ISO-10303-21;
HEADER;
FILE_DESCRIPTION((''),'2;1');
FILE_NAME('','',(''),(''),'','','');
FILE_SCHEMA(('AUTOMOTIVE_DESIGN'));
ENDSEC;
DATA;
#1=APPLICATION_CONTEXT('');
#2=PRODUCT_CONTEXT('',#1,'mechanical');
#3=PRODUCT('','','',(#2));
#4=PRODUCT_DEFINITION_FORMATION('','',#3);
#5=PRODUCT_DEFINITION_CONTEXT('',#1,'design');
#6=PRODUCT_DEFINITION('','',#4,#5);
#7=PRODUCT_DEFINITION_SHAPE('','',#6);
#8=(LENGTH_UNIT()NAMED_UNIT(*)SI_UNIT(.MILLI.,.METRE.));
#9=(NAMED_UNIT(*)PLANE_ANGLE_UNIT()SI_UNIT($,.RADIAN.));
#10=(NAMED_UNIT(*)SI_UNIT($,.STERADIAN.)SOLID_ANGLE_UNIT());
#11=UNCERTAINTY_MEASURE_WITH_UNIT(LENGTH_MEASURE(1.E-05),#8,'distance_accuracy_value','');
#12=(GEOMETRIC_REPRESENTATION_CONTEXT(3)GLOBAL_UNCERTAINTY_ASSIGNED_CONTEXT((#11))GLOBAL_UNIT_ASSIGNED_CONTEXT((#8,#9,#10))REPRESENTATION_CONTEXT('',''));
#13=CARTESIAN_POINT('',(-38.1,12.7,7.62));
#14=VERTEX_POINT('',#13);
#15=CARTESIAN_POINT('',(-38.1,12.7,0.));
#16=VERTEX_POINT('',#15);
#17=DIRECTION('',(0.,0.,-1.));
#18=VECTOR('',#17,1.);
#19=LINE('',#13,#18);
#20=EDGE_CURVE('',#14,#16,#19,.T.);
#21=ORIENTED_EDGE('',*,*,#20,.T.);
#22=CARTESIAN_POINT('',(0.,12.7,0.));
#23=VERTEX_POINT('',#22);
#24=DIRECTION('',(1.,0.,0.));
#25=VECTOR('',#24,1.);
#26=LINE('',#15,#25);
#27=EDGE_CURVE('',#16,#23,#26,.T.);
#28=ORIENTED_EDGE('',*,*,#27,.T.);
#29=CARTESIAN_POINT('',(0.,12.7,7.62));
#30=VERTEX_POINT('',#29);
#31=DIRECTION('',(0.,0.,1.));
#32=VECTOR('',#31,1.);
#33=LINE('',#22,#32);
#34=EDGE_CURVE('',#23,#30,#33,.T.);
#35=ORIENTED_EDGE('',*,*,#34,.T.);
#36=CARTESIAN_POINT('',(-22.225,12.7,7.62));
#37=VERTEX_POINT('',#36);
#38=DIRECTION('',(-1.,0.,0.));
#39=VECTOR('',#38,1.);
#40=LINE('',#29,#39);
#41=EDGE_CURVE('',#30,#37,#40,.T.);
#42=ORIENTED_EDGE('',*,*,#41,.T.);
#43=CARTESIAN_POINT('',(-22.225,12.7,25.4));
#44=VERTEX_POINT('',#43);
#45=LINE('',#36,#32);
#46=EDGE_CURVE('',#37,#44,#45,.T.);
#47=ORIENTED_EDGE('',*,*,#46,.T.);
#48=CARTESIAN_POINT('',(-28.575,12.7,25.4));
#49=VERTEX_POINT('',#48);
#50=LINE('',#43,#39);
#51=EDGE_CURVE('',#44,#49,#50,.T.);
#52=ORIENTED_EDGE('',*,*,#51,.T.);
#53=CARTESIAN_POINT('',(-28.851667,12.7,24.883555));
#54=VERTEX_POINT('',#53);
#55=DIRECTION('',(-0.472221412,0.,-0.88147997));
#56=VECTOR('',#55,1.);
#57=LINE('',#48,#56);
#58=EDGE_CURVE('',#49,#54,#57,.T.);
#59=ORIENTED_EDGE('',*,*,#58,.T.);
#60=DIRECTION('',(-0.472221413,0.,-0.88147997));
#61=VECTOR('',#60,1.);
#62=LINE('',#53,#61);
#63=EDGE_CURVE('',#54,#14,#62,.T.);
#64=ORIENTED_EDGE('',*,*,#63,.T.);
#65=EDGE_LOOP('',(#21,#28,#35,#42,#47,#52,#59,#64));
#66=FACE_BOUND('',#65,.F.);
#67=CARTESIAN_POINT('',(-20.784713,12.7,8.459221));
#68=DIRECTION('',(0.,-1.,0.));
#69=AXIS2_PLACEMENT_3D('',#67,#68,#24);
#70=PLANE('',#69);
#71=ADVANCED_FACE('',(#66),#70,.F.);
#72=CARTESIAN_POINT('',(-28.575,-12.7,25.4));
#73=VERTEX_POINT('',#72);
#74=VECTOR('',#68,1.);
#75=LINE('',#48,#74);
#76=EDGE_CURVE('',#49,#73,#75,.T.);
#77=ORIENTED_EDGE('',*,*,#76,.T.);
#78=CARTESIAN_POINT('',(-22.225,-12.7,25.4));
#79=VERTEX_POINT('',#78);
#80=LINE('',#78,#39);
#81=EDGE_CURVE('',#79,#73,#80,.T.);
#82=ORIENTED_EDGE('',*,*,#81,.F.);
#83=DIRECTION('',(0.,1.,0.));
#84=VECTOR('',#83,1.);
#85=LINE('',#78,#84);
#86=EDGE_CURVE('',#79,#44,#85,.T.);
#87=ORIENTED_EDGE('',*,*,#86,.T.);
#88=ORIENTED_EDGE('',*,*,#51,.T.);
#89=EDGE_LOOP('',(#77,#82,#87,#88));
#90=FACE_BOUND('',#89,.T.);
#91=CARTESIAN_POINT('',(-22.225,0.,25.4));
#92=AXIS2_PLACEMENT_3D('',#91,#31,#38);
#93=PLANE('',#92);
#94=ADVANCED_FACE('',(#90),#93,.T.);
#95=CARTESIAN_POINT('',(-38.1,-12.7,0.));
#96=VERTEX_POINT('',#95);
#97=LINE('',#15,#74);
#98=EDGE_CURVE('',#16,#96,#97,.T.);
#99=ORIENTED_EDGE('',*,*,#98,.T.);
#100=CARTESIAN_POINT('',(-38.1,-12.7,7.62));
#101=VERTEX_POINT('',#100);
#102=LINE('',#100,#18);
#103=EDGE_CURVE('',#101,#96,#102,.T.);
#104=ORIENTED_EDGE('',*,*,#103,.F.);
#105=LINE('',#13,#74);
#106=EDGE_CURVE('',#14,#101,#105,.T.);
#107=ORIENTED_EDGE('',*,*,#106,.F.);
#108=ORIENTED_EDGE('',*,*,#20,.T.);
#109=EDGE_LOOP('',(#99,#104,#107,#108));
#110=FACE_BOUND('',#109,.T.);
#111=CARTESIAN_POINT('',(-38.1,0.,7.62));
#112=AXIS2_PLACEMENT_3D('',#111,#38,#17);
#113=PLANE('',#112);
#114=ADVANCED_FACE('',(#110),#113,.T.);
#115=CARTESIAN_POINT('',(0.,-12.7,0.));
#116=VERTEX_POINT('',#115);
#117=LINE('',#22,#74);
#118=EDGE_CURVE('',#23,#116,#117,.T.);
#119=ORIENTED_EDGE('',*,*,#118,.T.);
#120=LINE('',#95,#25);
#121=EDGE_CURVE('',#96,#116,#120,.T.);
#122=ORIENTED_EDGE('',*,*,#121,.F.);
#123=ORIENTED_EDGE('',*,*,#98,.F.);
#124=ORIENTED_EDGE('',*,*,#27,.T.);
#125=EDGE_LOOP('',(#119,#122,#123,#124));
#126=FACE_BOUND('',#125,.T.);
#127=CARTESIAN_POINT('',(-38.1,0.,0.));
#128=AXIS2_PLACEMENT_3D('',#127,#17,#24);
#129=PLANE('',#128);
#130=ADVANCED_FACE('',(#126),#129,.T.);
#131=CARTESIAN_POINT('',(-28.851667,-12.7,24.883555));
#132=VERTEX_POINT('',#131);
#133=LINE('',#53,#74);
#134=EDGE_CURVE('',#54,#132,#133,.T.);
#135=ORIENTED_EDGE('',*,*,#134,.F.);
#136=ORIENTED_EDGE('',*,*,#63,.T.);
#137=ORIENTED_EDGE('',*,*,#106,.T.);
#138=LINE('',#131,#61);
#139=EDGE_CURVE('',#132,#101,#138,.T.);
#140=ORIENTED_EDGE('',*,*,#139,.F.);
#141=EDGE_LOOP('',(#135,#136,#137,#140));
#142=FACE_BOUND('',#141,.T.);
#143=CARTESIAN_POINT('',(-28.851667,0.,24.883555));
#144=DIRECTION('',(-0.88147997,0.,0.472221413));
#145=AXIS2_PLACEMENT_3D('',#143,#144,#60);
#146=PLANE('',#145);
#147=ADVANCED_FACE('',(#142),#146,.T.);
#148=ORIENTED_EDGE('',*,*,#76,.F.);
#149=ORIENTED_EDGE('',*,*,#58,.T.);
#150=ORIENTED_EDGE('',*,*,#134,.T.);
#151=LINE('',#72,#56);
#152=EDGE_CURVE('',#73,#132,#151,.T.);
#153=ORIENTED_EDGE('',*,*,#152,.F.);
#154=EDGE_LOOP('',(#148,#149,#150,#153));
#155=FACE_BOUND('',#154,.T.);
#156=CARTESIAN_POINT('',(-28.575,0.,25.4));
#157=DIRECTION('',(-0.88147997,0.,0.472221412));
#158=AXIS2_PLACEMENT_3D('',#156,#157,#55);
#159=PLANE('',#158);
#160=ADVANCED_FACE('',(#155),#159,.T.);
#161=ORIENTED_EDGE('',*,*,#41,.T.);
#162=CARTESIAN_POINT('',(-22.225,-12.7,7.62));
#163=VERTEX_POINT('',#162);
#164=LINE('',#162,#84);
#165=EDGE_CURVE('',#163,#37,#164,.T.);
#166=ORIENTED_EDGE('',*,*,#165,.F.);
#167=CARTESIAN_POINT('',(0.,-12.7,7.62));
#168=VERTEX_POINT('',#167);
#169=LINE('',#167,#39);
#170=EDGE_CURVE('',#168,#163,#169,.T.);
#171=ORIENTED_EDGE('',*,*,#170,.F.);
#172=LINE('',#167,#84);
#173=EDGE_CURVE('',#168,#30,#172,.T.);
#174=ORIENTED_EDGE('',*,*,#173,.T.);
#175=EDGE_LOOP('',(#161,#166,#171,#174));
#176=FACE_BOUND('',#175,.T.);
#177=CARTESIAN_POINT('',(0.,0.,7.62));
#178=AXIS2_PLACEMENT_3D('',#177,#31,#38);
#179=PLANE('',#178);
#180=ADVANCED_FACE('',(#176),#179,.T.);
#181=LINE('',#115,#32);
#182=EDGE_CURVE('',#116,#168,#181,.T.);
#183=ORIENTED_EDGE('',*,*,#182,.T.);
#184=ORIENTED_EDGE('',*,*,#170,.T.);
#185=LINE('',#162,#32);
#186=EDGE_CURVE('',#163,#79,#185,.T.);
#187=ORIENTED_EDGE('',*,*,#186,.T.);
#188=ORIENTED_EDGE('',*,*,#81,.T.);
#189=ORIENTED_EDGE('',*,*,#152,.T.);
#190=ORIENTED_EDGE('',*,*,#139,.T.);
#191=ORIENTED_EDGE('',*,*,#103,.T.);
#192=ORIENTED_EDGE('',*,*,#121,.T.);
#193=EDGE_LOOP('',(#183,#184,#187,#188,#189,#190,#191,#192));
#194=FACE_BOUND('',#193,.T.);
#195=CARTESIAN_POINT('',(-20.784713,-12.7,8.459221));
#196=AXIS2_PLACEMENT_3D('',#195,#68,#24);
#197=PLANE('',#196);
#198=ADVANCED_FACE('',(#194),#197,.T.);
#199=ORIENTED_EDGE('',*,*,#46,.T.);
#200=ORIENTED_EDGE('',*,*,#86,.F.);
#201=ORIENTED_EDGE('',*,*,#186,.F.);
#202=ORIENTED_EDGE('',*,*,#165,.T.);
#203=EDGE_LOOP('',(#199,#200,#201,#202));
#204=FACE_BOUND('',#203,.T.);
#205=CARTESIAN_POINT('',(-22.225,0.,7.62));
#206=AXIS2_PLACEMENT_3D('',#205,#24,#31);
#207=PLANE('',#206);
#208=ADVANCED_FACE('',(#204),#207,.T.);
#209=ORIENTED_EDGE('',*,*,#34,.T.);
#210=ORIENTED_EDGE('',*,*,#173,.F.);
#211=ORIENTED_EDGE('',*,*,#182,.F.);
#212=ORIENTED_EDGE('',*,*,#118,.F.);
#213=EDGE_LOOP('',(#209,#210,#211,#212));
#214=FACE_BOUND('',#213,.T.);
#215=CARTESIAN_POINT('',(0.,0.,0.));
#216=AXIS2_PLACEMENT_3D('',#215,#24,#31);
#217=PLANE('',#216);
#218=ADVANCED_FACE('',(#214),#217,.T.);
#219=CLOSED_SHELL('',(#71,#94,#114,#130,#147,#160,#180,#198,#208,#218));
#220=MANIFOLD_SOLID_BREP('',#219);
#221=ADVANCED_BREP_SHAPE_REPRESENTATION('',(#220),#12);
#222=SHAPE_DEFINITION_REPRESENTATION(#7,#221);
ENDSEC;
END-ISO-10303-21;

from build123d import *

# Parameters (mm, degrees)
F3_DEPTH = 12.7


# Not quite as in the source:
# - the program builds the solid bodies; features that only make, move or delete a surface that nothing else refers to are left out


with BuildPart() as f3:
    # F2 (on Front) → F3 (new body, symmetric)
    with BuildSketch(Plane.XZ):
        with BuildLine():
            Line((-22.225, 25.4), (-28.3980633142, 25.4))
            ThreePointArc((-28.3980633142, 25.4), (-28.6260297603, 25.1428005632), (-28.8516668522, 24.8835552092))
            Line((-28.8516668522, 24.8835552092), (-38.1, 7.62))
            Line((-38.1, 7.62), (-38.1, 0))
            Line((-38.1, 0), (0, 0))
            Line((0, 0), (0, 7.62))
            Line((0, 7.62), (-22.225, 7.62))
            Line((-22.225, 7.62), (-22.225, 25.4))
        make_face()
        with BuildLine():
            ThreePointArc((-28.8516668522, 24.8835552092), (-28.6260297603, 25.1428005632), (-28.3980633142, 25.4))
            Line((-28.3980633142, 25.4), (-28.575, 25.4))
            Line((-28.575, 25.4), (-28.8516668522, 24.8835552092))
        make_face()
    extrude(amount=F3_DEPTH, both=True)


solid = f3.part
